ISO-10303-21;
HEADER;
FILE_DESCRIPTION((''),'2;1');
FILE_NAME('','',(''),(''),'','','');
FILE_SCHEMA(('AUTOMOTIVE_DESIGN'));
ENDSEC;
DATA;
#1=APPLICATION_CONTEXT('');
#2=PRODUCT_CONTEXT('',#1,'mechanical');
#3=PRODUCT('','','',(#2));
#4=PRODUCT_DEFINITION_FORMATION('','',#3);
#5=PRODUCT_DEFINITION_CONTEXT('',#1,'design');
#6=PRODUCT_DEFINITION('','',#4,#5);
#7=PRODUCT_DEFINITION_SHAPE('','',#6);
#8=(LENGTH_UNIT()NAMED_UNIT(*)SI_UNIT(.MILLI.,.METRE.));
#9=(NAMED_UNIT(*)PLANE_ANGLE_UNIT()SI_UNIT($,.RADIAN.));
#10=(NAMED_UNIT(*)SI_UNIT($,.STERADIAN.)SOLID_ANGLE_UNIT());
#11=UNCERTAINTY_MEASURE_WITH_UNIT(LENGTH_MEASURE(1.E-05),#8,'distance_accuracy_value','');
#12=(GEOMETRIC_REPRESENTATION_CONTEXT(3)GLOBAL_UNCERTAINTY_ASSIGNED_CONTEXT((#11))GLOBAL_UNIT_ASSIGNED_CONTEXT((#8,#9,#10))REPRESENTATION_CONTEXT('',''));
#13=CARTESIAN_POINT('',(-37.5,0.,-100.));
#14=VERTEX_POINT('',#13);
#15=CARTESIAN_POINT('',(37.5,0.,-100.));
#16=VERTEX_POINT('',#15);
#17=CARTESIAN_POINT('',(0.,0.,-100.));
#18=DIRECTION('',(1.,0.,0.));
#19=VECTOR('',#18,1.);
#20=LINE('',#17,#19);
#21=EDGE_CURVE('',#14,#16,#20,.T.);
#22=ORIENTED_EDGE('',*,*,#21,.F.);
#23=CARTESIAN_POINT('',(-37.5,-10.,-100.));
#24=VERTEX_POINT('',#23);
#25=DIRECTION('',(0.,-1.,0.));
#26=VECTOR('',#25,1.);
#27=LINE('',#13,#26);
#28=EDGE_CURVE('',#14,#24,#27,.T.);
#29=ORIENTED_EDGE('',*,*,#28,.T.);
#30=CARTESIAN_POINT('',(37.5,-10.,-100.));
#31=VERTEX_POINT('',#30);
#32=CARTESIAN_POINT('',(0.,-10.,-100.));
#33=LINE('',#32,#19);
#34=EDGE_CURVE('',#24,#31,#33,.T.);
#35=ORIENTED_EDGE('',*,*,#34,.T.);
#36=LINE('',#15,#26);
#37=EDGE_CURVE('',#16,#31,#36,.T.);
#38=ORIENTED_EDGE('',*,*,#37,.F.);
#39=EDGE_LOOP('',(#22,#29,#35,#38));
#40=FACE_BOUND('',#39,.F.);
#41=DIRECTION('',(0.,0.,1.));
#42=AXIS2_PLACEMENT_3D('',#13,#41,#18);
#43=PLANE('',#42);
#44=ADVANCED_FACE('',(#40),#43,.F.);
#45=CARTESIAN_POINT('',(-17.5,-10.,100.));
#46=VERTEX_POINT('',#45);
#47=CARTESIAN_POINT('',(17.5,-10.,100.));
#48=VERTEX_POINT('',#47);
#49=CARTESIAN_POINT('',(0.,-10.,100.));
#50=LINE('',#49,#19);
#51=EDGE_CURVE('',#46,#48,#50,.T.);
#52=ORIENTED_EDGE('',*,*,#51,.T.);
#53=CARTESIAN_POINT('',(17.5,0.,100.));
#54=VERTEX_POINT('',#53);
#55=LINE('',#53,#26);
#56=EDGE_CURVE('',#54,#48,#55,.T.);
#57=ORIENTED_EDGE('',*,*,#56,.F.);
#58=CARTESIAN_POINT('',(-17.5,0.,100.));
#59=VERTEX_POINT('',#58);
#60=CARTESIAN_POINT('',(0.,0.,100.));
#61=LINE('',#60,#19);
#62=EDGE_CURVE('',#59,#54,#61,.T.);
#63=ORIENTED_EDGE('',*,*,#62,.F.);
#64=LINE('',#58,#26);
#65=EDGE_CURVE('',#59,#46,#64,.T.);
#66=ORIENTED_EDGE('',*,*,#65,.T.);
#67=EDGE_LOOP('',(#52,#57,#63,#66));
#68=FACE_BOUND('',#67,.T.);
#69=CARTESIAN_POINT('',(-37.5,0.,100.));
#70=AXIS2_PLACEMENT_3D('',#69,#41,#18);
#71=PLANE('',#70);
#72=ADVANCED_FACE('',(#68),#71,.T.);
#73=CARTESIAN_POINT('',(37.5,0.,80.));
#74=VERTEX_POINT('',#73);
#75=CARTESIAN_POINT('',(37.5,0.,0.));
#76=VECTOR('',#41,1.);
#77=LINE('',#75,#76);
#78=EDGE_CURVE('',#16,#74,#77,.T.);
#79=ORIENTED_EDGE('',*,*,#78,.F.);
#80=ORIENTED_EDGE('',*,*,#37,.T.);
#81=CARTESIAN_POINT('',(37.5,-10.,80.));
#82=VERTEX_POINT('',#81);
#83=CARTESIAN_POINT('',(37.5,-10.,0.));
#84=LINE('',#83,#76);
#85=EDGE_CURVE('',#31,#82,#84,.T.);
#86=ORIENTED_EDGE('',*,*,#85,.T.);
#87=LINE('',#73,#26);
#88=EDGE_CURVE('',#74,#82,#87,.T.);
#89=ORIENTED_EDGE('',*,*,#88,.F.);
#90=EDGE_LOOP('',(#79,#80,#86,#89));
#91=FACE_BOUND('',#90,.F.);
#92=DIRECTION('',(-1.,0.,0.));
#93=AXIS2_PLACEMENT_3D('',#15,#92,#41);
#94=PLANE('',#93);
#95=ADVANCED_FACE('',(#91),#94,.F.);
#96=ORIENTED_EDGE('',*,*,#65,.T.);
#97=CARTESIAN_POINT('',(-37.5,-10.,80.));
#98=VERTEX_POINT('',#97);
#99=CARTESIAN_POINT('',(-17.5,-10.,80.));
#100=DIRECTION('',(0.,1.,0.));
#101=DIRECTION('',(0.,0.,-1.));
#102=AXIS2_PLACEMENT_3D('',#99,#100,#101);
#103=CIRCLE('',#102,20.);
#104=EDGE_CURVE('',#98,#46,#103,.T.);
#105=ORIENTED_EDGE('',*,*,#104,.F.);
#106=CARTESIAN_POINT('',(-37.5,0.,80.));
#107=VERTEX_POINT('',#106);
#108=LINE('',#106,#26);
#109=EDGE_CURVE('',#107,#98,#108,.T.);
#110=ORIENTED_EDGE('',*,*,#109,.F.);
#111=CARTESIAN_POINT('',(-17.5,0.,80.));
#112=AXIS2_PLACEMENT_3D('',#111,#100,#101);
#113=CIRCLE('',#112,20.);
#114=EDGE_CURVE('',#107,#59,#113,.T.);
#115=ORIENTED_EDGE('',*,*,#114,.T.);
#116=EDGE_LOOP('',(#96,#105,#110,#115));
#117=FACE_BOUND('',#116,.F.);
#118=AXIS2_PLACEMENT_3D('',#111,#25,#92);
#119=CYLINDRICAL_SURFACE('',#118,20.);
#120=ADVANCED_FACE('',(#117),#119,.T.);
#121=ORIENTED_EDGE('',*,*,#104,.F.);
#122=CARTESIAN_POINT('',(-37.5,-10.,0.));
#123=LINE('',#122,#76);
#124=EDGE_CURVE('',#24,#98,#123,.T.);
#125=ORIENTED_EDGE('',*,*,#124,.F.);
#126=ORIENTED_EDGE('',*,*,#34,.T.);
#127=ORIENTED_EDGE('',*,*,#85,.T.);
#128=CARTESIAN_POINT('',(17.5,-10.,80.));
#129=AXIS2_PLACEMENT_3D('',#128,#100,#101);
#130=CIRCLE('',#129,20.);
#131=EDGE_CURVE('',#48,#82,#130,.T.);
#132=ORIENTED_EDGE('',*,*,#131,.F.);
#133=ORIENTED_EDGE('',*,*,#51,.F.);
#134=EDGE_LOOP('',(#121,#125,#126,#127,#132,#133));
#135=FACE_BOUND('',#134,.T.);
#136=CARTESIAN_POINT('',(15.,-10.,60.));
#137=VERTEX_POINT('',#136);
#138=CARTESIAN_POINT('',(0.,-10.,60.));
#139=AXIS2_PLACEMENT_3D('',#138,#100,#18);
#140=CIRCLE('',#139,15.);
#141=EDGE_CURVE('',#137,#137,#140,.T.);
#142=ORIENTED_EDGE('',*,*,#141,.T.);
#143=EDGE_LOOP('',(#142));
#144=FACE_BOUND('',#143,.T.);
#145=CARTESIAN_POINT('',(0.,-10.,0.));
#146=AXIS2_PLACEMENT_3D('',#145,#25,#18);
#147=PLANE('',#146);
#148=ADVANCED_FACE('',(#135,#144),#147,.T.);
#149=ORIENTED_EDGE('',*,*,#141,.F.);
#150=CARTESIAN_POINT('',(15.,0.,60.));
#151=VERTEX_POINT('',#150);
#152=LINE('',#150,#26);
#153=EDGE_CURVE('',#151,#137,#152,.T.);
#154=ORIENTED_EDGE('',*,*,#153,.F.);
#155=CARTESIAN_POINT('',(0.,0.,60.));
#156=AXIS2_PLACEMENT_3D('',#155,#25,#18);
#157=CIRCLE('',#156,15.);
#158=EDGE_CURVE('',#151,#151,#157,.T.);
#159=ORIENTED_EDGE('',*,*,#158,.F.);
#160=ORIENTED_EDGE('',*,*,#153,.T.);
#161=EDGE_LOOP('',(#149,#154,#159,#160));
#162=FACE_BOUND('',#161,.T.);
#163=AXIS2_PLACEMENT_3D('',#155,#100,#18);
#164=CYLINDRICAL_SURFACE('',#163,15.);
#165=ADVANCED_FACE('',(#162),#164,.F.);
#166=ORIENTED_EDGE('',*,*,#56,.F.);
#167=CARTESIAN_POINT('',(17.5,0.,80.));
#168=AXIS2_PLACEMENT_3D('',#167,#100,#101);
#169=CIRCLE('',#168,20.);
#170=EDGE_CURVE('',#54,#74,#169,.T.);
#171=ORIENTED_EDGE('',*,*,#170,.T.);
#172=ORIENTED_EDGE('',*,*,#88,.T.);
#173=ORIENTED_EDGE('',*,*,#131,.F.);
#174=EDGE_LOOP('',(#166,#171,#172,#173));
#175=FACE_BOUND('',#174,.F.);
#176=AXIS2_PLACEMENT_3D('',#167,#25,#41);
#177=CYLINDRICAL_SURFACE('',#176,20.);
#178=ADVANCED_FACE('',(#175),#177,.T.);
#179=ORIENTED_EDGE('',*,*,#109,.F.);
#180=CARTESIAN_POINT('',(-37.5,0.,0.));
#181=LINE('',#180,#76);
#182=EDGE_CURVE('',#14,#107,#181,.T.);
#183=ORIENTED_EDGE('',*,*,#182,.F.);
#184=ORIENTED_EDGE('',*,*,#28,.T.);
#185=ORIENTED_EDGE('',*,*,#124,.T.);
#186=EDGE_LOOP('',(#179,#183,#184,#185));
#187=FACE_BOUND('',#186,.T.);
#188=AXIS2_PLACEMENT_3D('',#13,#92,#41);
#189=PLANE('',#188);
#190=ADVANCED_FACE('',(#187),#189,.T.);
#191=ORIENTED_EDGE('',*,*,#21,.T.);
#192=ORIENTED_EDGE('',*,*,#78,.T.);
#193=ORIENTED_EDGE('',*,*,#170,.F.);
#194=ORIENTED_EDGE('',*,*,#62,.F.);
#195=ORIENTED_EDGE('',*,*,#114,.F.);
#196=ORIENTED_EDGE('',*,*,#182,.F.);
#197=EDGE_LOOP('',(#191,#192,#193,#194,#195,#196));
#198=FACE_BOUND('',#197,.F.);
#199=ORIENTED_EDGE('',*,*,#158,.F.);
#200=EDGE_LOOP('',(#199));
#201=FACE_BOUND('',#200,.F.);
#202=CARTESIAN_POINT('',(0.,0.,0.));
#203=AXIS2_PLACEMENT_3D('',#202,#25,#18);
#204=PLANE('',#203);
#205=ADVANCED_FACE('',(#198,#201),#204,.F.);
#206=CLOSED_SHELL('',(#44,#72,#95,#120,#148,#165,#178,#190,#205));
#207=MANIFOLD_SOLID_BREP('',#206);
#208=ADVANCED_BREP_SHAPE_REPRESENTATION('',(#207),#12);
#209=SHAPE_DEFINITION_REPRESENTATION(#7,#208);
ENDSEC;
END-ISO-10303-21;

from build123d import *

# Parameters (mm, degrees)
F0_W          = 75
F0_H          = 200
F1_DEPTH      = 10
F2_R          = 15
F3_DEPTH      = 219
F3_DEPTH_BACK = 25
F4_R          = 20


# Not quite as in the source:
# - an extrude ends at something that could not be found from the text; its depth is read off the source's solid


with BuildPart() as f1:
    # F0 (on Front) → F1 (new body)
    with BuildSketch(Plane.XZ):
        Rectangle(F0_W, F0_H)
    extrude(amount=F1_DEPTH)

    # F2 (on Front) → F3 (cut, two sides)
    with BuildSketch(Plane.XZ) as f3_sk:
        with Locations((0, 60)):
            Circle(F2_R)
    extrude(amount=-F3_DEPTH, mode=Mode.SUBTRACT)
    extrude(f3_sk.sketch, amount=F3_DEPTH_BACK, mode=Mode.SUBTRACT)

    # F4
    f4_edges = [f1.edges().sort_by_distance(p)[0] for p in [
        (-37.5, -5, 100),
        (37.5, -5, 100),
    ]]
    fillet(f4_edges, radius=F4_R)


solid = f1.part
